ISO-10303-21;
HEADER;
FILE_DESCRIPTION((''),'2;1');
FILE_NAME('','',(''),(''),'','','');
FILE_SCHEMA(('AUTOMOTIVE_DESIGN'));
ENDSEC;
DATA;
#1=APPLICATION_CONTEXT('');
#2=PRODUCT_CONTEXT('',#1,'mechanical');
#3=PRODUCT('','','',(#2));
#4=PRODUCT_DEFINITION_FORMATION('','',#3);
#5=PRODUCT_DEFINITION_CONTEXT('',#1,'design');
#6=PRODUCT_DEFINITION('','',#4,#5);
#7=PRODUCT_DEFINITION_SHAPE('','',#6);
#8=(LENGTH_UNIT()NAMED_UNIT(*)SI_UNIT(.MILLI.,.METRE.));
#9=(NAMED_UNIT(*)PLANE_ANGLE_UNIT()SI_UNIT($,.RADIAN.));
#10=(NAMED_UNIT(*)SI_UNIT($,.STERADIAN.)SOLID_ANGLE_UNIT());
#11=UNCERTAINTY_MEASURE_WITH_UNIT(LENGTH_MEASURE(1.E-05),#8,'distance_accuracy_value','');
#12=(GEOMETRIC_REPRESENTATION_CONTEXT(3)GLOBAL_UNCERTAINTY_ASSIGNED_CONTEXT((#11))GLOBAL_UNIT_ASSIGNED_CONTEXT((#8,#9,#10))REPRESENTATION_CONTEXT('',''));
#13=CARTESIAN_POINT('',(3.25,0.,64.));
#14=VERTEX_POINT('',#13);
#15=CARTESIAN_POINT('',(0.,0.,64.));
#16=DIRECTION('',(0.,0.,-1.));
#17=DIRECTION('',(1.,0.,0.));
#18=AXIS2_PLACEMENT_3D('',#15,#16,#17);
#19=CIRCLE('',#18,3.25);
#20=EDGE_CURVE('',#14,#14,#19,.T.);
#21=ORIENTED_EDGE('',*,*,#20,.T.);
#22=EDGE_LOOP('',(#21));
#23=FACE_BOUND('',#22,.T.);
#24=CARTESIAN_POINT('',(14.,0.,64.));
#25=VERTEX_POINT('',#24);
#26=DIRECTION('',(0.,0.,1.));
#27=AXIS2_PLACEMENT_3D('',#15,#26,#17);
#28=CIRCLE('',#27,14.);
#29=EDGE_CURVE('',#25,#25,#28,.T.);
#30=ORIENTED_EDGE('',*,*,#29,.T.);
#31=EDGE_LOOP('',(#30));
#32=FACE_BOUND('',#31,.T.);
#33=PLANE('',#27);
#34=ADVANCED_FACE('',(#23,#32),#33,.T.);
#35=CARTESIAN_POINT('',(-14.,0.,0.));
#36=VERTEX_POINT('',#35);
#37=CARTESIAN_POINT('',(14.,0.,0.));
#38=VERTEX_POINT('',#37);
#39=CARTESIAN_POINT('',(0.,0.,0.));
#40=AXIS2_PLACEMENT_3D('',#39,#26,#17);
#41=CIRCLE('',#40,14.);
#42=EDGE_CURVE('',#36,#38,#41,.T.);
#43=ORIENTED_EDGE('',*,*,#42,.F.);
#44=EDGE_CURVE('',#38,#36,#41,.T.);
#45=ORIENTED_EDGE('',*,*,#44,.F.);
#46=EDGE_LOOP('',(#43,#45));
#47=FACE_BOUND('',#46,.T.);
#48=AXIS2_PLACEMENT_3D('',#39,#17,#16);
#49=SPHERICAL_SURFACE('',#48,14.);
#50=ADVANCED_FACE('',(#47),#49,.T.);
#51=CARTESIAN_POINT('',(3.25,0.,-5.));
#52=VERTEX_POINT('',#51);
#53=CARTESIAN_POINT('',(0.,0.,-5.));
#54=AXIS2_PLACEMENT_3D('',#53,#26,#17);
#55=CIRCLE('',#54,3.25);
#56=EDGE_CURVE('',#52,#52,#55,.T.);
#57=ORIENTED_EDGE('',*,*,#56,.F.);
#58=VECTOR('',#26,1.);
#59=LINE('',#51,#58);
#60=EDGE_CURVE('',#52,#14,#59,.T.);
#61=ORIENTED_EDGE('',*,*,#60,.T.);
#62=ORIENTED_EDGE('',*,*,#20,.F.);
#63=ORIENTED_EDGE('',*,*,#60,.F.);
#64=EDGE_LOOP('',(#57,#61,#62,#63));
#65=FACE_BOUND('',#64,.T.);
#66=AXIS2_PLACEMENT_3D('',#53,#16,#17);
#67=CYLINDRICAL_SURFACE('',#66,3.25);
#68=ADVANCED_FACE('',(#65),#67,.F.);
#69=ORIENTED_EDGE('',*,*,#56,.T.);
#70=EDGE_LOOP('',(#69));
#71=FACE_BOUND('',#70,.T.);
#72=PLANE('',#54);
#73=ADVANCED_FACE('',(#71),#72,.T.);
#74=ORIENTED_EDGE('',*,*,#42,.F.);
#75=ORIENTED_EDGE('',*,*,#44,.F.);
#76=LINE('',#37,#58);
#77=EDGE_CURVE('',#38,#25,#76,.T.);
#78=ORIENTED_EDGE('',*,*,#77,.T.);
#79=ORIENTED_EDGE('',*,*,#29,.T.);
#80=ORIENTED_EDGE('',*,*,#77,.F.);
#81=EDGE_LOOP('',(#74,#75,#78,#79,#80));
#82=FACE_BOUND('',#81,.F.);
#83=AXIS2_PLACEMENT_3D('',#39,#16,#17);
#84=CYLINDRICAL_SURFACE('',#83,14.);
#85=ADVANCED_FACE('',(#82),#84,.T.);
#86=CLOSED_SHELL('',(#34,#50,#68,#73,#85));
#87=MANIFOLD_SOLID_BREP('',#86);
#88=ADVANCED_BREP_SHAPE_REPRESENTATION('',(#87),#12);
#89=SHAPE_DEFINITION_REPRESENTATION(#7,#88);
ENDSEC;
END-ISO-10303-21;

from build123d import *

# Parameters (mm, degrees)
F0_R     = 14
F1_DEPTH = 64
F6_R     = 3.25
F7_DEPTH = 69.14147


# Not quite as in the source:
# - a feature of the source that left no trace in its solid (it failed there, or was rolled back) is left out


with BuildPart() as f1:
    # F0 (on Top) → F1 (new body)
    with BuildSketch(Plane.XY):
        Circle(F0_R)
    extrude(amount=F1_DEPTH)

    # F2 (on Front) → F3 (revolve)
    with BuildSketch(Plane.XZ):
        with BuildLine():
            Line((0, 0), (-14, 0))
            ThreePointArc((-14, 0), (0, -14), (14, 0))
            Line((14, 0), (0, 0))
        make_face()
    revolve(axis=Axis((0, 0, 0), (1, 0, 0)))

    # F6 (on offset) → F7 (cut)
    with BuildSketch(Plane.XY.offset(-5)):
        Circle(F6_R)
    extrude(amount=F7_DEPTH, mode=Mode.SUBTRACT)


solid = f1.part
